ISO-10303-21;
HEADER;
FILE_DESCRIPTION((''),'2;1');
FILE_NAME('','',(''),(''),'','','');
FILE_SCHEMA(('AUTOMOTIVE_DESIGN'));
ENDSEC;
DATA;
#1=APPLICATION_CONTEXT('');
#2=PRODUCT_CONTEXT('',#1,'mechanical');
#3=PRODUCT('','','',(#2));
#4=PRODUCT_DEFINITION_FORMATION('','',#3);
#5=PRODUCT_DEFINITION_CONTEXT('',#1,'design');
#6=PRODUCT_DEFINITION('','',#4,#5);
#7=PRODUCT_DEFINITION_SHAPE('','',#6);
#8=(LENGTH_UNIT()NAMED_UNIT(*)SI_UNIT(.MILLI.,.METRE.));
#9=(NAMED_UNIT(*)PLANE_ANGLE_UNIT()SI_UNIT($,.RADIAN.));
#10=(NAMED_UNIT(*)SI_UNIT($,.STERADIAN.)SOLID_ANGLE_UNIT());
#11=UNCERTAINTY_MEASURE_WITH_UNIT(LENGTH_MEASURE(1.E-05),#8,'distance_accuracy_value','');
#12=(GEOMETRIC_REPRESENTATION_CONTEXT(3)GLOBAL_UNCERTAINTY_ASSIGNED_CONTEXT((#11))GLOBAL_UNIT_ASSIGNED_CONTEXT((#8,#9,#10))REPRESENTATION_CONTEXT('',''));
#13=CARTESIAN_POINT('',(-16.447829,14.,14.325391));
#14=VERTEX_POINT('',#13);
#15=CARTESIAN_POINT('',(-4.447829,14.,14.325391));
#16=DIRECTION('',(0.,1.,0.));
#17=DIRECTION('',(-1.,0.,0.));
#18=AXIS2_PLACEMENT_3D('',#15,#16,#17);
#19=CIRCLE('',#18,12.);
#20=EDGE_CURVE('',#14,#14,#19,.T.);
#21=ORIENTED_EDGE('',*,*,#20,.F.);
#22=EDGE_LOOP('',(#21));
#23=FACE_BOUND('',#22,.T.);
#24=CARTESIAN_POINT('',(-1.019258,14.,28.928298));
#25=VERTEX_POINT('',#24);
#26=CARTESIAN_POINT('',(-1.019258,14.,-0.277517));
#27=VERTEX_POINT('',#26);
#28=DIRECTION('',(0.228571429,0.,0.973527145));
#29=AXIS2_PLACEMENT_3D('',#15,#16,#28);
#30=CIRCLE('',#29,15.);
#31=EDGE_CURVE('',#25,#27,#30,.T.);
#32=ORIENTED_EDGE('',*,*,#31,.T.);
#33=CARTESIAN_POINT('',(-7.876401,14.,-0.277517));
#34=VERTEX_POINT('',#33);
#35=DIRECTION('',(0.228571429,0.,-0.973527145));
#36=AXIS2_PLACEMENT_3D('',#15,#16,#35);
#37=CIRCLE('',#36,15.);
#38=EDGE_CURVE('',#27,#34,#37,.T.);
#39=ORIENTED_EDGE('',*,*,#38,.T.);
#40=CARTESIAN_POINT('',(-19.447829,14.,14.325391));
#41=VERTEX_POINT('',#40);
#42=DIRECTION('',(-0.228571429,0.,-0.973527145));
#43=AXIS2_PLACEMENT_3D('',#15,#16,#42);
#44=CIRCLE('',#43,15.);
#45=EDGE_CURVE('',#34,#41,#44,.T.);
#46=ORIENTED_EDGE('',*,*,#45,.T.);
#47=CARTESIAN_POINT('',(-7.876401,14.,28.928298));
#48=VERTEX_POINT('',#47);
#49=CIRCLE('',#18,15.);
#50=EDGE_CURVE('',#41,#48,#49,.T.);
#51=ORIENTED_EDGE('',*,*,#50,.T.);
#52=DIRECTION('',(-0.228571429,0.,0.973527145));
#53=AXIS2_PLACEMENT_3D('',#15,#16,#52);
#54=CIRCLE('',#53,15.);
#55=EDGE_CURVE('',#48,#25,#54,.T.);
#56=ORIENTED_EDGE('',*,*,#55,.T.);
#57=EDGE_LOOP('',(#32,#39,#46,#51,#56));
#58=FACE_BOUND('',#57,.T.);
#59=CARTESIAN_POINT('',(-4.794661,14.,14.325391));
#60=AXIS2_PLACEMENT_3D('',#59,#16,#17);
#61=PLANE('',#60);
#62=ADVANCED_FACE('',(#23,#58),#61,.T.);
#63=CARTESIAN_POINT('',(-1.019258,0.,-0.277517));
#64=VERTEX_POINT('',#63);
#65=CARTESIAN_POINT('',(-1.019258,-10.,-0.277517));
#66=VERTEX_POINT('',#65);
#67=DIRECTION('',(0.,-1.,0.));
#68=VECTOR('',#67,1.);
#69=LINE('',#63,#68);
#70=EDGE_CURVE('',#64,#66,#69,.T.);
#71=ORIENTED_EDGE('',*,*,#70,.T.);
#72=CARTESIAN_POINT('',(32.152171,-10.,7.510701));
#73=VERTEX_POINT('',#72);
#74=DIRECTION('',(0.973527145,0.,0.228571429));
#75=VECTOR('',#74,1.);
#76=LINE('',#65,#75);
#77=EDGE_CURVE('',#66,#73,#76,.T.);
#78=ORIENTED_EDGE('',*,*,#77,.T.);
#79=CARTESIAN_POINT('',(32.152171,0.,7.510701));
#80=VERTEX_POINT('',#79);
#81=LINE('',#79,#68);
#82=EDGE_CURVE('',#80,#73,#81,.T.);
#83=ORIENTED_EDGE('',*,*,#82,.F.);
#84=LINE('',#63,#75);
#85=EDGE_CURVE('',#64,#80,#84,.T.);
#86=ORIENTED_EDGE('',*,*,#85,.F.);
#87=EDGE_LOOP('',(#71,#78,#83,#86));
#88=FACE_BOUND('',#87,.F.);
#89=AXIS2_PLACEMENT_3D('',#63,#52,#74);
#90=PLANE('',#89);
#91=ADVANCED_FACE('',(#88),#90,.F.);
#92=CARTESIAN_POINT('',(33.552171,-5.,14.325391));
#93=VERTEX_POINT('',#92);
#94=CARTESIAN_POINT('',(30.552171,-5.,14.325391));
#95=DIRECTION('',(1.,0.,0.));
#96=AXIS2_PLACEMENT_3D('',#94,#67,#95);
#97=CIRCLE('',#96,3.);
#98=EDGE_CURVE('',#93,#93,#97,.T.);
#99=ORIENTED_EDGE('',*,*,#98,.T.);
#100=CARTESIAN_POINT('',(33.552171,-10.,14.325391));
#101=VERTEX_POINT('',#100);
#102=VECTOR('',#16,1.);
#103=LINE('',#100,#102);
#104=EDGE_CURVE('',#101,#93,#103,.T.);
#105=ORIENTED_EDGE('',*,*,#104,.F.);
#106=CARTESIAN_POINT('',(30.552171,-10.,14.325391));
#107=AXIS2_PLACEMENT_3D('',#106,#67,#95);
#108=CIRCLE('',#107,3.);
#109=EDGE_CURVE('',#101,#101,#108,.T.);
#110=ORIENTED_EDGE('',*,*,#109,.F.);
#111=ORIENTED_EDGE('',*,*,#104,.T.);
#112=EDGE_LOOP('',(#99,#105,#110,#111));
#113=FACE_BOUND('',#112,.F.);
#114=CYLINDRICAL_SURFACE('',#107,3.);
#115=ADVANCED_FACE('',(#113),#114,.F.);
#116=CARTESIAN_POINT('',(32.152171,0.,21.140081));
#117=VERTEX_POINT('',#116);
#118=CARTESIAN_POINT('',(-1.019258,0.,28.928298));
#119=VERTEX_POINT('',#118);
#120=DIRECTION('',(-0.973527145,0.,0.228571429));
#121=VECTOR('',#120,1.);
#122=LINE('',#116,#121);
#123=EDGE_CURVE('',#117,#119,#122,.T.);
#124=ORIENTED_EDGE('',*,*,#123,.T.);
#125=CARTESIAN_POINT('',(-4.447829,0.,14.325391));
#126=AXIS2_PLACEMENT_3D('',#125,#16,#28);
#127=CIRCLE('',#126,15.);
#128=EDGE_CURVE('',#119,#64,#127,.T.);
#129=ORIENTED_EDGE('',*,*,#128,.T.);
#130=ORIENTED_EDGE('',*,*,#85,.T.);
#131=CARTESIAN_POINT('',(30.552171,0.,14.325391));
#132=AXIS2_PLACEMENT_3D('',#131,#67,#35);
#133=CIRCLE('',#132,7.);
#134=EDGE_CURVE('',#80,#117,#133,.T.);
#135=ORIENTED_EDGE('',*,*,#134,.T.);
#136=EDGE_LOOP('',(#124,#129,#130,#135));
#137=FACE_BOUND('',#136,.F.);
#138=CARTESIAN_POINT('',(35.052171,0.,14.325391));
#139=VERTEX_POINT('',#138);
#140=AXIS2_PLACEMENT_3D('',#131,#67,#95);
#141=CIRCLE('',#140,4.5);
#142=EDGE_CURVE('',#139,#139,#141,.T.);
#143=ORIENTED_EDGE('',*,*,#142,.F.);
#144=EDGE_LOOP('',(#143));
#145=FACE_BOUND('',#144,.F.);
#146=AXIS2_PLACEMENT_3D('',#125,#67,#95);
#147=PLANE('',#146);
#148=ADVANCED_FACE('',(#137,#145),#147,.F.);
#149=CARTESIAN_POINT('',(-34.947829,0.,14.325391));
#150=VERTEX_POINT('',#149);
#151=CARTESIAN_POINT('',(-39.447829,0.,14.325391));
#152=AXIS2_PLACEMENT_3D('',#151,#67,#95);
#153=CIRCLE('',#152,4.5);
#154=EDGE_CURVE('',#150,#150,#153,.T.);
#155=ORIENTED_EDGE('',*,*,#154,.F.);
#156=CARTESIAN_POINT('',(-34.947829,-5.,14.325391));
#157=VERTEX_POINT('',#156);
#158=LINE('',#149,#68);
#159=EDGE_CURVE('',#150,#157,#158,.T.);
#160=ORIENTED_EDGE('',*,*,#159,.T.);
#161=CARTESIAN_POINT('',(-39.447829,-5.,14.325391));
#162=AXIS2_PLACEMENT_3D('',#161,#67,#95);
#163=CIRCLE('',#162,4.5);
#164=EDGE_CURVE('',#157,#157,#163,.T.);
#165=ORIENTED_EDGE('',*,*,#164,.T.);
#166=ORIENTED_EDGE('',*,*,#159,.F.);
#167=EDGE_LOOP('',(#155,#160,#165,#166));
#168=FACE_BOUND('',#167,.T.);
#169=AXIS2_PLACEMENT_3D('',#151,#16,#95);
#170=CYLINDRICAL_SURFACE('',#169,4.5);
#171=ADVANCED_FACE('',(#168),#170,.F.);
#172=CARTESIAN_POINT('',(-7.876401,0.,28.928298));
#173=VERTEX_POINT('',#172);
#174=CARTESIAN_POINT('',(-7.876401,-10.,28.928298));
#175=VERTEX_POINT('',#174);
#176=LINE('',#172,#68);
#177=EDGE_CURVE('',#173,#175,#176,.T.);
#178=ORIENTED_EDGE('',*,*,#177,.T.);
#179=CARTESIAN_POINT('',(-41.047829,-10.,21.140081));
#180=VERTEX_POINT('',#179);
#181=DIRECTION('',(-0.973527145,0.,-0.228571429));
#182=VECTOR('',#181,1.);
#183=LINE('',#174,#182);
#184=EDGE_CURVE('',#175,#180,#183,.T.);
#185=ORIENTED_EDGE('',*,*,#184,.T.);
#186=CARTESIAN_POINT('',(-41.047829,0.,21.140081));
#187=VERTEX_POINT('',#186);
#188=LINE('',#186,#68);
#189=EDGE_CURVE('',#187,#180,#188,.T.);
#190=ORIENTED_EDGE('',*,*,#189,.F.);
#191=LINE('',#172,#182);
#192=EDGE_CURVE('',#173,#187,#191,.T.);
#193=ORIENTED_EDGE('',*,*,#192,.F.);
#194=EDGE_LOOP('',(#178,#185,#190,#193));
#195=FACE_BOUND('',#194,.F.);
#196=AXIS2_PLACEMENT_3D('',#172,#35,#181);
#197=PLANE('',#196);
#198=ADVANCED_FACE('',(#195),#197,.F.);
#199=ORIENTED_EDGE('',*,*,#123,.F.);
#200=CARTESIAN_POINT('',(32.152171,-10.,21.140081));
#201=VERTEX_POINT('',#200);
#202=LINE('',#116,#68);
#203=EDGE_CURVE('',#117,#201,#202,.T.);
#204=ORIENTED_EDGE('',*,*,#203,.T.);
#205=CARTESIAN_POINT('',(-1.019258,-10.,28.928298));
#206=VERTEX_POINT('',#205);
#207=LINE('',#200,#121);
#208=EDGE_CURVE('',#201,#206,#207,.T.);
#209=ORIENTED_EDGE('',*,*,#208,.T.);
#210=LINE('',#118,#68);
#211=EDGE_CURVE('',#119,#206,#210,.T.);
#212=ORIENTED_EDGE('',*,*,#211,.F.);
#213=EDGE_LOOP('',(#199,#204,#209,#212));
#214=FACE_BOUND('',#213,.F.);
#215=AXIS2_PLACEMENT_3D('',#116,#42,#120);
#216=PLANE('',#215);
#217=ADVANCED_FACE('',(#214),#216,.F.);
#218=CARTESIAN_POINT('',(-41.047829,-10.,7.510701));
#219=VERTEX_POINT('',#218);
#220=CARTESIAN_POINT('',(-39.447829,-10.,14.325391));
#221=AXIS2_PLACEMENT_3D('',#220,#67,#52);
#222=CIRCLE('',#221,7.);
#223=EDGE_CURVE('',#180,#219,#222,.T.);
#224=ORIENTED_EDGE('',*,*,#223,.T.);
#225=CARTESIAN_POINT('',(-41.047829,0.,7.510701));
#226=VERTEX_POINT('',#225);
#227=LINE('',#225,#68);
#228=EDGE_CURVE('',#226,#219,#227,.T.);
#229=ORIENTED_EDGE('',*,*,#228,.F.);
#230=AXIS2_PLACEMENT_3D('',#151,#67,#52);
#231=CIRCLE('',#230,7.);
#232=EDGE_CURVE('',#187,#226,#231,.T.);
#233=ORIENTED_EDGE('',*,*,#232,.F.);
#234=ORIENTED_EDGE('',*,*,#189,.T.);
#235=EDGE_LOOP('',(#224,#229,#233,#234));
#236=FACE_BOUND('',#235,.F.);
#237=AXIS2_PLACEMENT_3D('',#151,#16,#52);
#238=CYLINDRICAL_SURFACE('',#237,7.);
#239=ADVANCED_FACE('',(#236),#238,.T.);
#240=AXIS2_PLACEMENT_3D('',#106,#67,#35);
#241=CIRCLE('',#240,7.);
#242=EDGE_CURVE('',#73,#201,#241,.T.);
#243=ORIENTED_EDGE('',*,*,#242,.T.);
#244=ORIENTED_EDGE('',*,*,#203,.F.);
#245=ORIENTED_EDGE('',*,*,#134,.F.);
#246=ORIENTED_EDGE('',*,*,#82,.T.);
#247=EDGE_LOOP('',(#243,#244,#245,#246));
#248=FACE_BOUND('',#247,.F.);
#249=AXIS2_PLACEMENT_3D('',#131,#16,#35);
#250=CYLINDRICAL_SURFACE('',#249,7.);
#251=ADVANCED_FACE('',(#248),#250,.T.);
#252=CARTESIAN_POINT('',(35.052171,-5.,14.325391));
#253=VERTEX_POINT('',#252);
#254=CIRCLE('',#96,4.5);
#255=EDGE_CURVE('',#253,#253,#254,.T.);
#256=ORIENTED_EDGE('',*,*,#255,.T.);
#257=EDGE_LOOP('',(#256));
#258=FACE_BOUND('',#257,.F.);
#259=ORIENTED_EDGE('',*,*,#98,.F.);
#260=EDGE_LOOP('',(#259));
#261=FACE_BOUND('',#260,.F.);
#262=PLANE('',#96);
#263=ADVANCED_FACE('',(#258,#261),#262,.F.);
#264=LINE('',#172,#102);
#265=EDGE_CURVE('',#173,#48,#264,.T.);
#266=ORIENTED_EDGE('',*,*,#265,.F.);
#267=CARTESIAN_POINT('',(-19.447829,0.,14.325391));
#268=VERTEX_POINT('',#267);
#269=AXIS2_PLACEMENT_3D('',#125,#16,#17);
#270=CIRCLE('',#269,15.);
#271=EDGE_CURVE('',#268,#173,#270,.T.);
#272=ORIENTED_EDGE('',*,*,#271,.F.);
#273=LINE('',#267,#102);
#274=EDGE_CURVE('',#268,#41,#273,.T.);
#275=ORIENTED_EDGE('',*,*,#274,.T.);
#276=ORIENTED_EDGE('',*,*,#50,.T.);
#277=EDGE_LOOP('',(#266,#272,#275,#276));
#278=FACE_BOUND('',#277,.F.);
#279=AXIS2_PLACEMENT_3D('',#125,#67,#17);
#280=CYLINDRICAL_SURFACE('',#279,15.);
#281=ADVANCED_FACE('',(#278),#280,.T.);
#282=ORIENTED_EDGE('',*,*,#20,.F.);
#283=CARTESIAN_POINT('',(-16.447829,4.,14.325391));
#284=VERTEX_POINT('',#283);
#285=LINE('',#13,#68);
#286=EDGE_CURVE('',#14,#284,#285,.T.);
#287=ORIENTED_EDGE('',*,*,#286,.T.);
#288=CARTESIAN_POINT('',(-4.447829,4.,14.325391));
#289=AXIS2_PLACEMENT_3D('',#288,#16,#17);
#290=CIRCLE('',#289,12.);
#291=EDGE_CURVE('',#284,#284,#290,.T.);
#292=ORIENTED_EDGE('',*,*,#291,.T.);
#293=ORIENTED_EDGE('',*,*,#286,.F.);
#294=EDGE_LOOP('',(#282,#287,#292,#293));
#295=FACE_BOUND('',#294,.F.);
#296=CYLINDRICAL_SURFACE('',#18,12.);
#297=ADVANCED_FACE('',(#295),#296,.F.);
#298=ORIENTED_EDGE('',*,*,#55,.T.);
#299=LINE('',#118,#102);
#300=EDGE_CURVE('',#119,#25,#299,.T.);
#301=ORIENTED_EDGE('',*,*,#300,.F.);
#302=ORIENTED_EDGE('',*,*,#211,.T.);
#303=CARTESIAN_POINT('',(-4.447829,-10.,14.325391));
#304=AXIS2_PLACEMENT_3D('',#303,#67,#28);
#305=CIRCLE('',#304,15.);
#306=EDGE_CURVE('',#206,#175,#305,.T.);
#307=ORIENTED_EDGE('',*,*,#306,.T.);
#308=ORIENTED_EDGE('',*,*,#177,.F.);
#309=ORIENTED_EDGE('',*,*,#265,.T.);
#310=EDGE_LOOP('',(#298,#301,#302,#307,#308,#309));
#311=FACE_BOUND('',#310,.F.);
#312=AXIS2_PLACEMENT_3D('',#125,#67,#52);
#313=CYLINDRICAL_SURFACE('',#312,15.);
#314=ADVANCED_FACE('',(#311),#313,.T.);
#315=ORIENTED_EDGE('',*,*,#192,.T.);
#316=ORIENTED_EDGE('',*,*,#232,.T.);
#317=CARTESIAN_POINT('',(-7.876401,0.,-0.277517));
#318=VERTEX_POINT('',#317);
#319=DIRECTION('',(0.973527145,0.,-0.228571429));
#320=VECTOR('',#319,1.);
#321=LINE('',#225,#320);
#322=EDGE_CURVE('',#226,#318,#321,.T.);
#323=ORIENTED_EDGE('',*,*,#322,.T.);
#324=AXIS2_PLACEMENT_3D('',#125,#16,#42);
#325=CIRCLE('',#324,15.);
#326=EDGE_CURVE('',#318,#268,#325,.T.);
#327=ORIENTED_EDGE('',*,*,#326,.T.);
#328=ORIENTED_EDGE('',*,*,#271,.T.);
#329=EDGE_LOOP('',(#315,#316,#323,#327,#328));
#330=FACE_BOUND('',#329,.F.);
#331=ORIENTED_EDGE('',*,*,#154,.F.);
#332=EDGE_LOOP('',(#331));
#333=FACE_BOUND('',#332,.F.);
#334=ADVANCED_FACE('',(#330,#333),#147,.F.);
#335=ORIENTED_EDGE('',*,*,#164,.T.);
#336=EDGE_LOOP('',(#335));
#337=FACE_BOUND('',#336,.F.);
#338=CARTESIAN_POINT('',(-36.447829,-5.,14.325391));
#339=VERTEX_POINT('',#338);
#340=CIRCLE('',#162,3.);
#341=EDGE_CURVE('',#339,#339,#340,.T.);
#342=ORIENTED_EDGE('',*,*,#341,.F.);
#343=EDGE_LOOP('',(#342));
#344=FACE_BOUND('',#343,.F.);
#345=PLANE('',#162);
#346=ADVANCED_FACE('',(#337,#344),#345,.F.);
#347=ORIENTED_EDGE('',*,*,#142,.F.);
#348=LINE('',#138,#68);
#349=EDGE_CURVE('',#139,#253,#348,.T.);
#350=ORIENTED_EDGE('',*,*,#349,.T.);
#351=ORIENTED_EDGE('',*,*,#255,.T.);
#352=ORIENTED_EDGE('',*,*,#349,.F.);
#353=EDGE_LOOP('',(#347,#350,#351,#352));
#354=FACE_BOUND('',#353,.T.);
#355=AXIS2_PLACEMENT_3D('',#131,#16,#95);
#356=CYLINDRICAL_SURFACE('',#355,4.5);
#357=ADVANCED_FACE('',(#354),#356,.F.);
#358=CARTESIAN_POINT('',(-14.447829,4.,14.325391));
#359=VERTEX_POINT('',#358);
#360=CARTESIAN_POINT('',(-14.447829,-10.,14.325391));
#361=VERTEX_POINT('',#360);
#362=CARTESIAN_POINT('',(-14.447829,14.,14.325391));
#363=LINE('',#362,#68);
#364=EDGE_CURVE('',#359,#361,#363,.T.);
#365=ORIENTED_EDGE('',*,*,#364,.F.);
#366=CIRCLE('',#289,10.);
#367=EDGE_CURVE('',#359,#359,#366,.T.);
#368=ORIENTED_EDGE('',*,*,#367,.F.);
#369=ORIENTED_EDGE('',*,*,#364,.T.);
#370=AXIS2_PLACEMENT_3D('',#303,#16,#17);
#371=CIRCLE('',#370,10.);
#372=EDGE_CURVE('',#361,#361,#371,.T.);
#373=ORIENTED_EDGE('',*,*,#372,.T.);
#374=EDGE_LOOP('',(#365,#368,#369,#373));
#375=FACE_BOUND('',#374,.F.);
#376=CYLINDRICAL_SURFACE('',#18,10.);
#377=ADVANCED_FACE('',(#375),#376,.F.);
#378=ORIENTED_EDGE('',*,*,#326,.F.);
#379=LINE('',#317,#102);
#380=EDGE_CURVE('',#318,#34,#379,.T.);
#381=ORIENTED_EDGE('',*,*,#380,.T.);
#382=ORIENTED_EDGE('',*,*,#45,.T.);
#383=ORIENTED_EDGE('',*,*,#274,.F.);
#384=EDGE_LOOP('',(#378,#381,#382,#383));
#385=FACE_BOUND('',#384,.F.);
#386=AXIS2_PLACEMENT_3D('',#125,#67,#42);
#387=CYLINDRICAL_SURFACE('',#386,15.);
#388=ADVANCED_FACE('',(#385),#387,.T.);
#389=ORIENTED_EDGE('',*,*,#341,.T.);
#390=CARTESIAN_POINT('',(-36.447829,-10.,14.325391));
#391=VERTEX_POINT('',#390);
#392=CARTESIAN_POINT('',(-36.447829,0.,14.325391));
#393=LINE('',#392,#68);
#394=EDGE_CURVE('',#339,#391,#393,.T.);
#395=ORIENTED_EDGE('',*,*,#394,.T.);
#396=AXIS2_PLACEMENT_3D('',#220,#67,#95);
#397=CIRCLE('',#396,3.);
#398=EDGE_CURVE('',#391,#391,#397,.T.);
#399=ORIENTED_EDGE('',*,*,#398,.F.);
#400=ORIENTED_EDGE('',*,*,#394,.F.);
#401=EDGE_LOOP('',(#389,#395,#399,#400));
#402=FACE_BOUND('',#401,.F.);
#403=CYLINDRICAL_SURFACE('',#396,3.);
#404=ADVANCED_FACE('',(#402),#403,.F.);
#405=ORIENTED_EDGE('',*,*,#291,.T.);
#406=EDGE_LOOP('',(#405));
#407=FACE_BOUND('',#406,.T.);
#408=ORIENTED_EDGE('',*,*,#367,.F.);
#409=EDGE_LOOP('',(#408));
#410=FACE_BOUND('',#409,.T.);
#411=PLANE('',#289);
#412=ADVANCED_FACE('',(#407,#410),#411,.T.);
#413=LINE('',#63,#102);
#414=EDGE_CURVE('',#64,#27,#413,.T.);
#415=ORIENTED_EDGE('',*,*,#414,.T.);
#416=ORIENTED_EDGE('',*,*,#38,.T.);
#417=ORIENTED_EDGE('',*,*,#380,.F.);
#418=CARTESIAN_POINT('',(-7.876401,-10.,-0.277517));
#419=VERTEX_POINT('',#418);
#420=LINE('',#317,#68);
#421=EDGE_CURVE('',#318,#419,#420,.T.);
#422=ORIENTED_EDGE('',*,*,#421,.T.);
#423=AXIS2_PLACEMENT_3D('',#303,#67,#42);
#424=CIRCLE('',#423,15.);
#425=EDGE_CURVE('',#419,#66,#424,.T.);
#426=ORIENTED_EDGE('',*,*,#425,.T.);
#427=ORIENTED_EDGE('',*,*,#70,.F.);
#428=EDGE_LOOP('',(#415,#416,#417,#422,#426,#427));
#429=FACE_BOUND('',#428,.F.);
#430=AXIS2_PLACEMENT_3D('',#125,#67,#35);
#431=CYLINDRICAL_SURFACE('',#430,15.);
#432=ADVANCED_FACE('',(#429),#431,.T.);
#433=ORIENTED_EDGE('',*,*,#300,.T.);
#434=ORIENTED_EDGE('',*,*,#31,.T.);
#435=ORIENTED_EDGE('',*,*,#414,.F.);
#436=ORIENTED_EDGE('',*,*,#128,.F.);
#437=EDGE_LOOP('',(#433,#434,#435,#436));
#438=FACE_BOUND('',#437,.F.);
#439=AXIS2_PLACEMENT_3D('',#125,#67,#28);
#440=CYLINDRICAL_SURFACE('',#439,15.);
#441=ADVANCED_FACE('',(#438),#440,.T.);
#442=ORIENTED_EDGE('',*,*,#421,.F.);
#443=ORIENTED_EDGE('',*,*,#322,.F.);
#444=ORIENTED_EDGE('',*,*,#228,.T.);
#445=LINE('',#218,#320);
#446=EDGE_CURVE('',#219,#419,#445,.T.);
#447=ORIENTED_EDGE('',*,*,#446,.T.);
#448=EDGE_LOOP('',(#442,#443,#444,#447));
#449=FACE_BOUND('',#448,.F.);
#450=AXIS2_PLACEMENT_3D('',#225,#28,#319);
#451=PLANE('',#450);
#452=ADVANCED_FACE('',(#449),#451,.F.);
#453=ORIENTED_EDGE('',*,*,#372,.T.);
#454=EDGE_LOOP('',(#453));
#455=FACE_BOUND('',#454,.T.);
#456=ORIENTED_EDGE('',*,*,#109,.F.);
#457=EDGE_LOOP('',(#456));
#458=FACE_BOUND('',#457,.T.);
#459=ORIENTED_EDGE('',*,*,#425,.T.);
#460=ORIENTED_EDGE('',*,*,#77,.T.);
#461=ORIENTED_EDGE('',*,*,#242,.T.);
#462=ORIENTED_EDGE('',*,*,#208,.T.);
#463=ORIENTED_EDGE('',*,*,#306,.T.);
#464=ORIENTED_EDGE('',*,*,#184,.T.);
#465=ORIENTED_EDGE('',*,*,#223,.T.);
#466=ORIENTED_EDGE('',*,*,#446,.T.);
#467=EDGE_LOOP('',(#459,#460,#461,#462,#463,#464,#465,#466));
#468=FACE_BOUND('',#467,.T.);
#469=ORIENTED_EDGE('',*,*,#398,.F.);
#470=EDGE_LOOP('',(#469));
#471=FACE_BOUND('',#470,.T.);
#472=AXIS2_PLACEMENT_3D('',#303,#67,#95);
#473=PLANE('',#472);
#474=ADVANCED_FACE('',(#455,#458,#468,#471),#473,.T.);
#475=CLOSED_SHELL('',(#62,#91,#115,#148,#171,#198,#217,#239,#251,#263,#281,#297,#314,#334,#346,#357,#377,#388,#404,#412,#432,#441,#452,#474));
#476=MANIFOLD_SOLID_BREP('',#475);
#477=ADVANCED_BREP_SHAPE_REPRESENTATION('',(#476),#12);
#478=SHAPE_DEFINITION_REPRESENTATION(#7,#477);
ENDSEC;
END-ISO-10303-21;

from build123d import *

# Parameters (mm, degrees)
F1_DEPTH  = 10
F2_R      = 3
F3_DEPTH  = 10
F4_R      = 4.5
F4_R_2    = 3
F5_DEPTH  = 5
F6_R      = 4.5
F7_DEPTH  = 5
F8_DEPTH  = 5
F10_DEPTH = 14
F11_R     = 10
F12_DEPTH = 20
F13_R     = 10
F14_DEPTH = 40
F15_R     = 12
F15_R_2   = 10
F16_DEPTH = 10


with BuildPart() as f1:
    # F0 (on Front) → F1 (new body)
    with BuildSketch(Plane.XZ):
        with BuildLine():
            Line((32.1521708727, 21.1400806223), (-1.0192576987, 28.9282977823))
            ThreePointArc((-1.0192576987, 28.9282977823), (-4.4478291273, 29.3253906074), (-7.8764005559, 28.9282977823))
            Line((-7.8764005559, 28.9282977823), (-41.0478291273, 21.1400806223))
            ThreePointArc((-41.0478291273, 21.1400806223), (-46.4478291273, 14.3253906074), (-41.0478291273, 7.5107005924))
            Line((-41.0478291273, 7.5107005924), (-7.8764005559, -0.2775165675))
            ThreePointArc((-7.8764005559, -0.2775165675), (-4.4478291273, -0.6746093926), (-1.0192576987, -0.2775165675))
            Line((-1.0192576987, -0.2775165675), (32.1521708727, 7.5107005924))
            ThreePointArc((32.1521708727, 7.5107005924), (37.5521708727, 14.3253906074), (32.1521708727, 21.1400806223))
        make_face()
    extrude(amount=F1_DEPTH)

    # F2 (on face) → F3 (cut)
    with BuildSketch(Plane.XZ.offset(10)):
        with Locations((-39.4478291273, 14.3253906074)):
            Circle(F2_R)
        with Locations((30.5521708727, 14.3253906074)):
            Circle(F2_R)
    extrude(amount=-F3_DEPTH, mode=Mode.SUBTRACT)

    # F4 (on face) → F5 (join)
    with BuildSketch(Plane.XZ.offset(10)):
        with Locations((-39.4478291273, 14.3253906074)):
            Circle(F4_R)
        with Locations((-39.4478291273, 14.3253906074)):
            Circle(F4_R_2, mode=Mode.SUBTRACT)
        with Locations((30.5521708727, 14.3253906074)):
            Circle(F4_R)
        with Locations((30.5521708727, 14.3253906074)):
            Circle(F4_R_2, mode=Mode.SUBTRACT)
    extrude(amount=-F5_DEPTH)

    # F6 (on Front) → F7 (cut)
    with BuildSketch(Plane.XZ):
        with Locations((-39.4478291273, 14.3253906074)):
            Circle(F6_R)
    extrude(amount=-F7_DEPTH, mode=Mode.SUBTRACT)

    # F6 (on Front) → F8 (cut)
    with BuildSketch(Plane.XZ):
        with Locations((-39.4478291273, 14.3253906074)):
            Circle(F6_R)
        with Locations((30.5521708727, 14.3253906074)):
            Circle(F6_R)
    extrude(amount=F8_DEPTH, mode=Mode.SUBTRACT)

    # F9 (on face) → F10 (join)
    with BuildSketch(Plane(origin=(0, 0, 0), x_dir=(-1, 0, 0), z_dir=(0, 1, 0))):
        with BuildLine():
            ThreePointArc((7.8764005559, -0.2775165675), (16.2042863196, 5.0095055563), (19.4478291273, 14.3253906074))
            ThreePointArc((19.4478291273, 14.3253906074), (16.2042863196, 23.6412756585), (7.8764005559, 28.9282977823))
            ThreePointArc((7.8764005559, 28.9282977823), (4.4478291273, 29.3253906074), (1.0192576987, 28.9282977823))
            ThreePointArc((1.0192576987, 28.9282977823), (-10.5521708727, 14.3253906074), (1.0192576987, -0.2775165675))
            ThreePointArc((1.0192576987, -0.2775165675), (4.4478291273, -0.6746093926), (7.8764005559, -0.2775165675))
        make_face()
    extrude(amount=F10_DEPTH)

    # F11 (on face) → F12 (cut)
    with BuildSketch(Plane(origin=(0, 14, 0), x_dir=(-1, 0, 0), z_dir=(0, 1, 0))):
        with Locations((4.4478291273, 14.3253906074)):
            Circle(F11_R)
    extrude(amount=F12_DEPTH, mode=Mode.SUBTRACT)

    # F13 (on face) → F14 (cut)
    with BuildSketch(Plane(origin=(0, 14, 0), x_dir=(-1, 0, 0), z_dir=(0, 1, 0))):
        with Locations((4.4478291273, 14.3253906074)):
            Circle(F13_R)
    extrude(amount=-F14_DEPTH, mode=Mode.SUBTRACT)

    # F15 (on face) → F16 (cut)
    with BuildSketch(Plane(origin=(0, 14, 0), x_dir=(-1, 0, 0), z_dir=(0, 1, 0))):
        with Locations((4.4478291273, 14.3253906074)):
            Circle(F15_R)
        with Locations((4.4478291273, 14.3253906074)):
            Circle(F15_R_2, mode=Mode.SUBTRACT)
    extrude(amount=-F16_DEPTH, mode=Mode.SUBTRACT)


solid = f1.part
